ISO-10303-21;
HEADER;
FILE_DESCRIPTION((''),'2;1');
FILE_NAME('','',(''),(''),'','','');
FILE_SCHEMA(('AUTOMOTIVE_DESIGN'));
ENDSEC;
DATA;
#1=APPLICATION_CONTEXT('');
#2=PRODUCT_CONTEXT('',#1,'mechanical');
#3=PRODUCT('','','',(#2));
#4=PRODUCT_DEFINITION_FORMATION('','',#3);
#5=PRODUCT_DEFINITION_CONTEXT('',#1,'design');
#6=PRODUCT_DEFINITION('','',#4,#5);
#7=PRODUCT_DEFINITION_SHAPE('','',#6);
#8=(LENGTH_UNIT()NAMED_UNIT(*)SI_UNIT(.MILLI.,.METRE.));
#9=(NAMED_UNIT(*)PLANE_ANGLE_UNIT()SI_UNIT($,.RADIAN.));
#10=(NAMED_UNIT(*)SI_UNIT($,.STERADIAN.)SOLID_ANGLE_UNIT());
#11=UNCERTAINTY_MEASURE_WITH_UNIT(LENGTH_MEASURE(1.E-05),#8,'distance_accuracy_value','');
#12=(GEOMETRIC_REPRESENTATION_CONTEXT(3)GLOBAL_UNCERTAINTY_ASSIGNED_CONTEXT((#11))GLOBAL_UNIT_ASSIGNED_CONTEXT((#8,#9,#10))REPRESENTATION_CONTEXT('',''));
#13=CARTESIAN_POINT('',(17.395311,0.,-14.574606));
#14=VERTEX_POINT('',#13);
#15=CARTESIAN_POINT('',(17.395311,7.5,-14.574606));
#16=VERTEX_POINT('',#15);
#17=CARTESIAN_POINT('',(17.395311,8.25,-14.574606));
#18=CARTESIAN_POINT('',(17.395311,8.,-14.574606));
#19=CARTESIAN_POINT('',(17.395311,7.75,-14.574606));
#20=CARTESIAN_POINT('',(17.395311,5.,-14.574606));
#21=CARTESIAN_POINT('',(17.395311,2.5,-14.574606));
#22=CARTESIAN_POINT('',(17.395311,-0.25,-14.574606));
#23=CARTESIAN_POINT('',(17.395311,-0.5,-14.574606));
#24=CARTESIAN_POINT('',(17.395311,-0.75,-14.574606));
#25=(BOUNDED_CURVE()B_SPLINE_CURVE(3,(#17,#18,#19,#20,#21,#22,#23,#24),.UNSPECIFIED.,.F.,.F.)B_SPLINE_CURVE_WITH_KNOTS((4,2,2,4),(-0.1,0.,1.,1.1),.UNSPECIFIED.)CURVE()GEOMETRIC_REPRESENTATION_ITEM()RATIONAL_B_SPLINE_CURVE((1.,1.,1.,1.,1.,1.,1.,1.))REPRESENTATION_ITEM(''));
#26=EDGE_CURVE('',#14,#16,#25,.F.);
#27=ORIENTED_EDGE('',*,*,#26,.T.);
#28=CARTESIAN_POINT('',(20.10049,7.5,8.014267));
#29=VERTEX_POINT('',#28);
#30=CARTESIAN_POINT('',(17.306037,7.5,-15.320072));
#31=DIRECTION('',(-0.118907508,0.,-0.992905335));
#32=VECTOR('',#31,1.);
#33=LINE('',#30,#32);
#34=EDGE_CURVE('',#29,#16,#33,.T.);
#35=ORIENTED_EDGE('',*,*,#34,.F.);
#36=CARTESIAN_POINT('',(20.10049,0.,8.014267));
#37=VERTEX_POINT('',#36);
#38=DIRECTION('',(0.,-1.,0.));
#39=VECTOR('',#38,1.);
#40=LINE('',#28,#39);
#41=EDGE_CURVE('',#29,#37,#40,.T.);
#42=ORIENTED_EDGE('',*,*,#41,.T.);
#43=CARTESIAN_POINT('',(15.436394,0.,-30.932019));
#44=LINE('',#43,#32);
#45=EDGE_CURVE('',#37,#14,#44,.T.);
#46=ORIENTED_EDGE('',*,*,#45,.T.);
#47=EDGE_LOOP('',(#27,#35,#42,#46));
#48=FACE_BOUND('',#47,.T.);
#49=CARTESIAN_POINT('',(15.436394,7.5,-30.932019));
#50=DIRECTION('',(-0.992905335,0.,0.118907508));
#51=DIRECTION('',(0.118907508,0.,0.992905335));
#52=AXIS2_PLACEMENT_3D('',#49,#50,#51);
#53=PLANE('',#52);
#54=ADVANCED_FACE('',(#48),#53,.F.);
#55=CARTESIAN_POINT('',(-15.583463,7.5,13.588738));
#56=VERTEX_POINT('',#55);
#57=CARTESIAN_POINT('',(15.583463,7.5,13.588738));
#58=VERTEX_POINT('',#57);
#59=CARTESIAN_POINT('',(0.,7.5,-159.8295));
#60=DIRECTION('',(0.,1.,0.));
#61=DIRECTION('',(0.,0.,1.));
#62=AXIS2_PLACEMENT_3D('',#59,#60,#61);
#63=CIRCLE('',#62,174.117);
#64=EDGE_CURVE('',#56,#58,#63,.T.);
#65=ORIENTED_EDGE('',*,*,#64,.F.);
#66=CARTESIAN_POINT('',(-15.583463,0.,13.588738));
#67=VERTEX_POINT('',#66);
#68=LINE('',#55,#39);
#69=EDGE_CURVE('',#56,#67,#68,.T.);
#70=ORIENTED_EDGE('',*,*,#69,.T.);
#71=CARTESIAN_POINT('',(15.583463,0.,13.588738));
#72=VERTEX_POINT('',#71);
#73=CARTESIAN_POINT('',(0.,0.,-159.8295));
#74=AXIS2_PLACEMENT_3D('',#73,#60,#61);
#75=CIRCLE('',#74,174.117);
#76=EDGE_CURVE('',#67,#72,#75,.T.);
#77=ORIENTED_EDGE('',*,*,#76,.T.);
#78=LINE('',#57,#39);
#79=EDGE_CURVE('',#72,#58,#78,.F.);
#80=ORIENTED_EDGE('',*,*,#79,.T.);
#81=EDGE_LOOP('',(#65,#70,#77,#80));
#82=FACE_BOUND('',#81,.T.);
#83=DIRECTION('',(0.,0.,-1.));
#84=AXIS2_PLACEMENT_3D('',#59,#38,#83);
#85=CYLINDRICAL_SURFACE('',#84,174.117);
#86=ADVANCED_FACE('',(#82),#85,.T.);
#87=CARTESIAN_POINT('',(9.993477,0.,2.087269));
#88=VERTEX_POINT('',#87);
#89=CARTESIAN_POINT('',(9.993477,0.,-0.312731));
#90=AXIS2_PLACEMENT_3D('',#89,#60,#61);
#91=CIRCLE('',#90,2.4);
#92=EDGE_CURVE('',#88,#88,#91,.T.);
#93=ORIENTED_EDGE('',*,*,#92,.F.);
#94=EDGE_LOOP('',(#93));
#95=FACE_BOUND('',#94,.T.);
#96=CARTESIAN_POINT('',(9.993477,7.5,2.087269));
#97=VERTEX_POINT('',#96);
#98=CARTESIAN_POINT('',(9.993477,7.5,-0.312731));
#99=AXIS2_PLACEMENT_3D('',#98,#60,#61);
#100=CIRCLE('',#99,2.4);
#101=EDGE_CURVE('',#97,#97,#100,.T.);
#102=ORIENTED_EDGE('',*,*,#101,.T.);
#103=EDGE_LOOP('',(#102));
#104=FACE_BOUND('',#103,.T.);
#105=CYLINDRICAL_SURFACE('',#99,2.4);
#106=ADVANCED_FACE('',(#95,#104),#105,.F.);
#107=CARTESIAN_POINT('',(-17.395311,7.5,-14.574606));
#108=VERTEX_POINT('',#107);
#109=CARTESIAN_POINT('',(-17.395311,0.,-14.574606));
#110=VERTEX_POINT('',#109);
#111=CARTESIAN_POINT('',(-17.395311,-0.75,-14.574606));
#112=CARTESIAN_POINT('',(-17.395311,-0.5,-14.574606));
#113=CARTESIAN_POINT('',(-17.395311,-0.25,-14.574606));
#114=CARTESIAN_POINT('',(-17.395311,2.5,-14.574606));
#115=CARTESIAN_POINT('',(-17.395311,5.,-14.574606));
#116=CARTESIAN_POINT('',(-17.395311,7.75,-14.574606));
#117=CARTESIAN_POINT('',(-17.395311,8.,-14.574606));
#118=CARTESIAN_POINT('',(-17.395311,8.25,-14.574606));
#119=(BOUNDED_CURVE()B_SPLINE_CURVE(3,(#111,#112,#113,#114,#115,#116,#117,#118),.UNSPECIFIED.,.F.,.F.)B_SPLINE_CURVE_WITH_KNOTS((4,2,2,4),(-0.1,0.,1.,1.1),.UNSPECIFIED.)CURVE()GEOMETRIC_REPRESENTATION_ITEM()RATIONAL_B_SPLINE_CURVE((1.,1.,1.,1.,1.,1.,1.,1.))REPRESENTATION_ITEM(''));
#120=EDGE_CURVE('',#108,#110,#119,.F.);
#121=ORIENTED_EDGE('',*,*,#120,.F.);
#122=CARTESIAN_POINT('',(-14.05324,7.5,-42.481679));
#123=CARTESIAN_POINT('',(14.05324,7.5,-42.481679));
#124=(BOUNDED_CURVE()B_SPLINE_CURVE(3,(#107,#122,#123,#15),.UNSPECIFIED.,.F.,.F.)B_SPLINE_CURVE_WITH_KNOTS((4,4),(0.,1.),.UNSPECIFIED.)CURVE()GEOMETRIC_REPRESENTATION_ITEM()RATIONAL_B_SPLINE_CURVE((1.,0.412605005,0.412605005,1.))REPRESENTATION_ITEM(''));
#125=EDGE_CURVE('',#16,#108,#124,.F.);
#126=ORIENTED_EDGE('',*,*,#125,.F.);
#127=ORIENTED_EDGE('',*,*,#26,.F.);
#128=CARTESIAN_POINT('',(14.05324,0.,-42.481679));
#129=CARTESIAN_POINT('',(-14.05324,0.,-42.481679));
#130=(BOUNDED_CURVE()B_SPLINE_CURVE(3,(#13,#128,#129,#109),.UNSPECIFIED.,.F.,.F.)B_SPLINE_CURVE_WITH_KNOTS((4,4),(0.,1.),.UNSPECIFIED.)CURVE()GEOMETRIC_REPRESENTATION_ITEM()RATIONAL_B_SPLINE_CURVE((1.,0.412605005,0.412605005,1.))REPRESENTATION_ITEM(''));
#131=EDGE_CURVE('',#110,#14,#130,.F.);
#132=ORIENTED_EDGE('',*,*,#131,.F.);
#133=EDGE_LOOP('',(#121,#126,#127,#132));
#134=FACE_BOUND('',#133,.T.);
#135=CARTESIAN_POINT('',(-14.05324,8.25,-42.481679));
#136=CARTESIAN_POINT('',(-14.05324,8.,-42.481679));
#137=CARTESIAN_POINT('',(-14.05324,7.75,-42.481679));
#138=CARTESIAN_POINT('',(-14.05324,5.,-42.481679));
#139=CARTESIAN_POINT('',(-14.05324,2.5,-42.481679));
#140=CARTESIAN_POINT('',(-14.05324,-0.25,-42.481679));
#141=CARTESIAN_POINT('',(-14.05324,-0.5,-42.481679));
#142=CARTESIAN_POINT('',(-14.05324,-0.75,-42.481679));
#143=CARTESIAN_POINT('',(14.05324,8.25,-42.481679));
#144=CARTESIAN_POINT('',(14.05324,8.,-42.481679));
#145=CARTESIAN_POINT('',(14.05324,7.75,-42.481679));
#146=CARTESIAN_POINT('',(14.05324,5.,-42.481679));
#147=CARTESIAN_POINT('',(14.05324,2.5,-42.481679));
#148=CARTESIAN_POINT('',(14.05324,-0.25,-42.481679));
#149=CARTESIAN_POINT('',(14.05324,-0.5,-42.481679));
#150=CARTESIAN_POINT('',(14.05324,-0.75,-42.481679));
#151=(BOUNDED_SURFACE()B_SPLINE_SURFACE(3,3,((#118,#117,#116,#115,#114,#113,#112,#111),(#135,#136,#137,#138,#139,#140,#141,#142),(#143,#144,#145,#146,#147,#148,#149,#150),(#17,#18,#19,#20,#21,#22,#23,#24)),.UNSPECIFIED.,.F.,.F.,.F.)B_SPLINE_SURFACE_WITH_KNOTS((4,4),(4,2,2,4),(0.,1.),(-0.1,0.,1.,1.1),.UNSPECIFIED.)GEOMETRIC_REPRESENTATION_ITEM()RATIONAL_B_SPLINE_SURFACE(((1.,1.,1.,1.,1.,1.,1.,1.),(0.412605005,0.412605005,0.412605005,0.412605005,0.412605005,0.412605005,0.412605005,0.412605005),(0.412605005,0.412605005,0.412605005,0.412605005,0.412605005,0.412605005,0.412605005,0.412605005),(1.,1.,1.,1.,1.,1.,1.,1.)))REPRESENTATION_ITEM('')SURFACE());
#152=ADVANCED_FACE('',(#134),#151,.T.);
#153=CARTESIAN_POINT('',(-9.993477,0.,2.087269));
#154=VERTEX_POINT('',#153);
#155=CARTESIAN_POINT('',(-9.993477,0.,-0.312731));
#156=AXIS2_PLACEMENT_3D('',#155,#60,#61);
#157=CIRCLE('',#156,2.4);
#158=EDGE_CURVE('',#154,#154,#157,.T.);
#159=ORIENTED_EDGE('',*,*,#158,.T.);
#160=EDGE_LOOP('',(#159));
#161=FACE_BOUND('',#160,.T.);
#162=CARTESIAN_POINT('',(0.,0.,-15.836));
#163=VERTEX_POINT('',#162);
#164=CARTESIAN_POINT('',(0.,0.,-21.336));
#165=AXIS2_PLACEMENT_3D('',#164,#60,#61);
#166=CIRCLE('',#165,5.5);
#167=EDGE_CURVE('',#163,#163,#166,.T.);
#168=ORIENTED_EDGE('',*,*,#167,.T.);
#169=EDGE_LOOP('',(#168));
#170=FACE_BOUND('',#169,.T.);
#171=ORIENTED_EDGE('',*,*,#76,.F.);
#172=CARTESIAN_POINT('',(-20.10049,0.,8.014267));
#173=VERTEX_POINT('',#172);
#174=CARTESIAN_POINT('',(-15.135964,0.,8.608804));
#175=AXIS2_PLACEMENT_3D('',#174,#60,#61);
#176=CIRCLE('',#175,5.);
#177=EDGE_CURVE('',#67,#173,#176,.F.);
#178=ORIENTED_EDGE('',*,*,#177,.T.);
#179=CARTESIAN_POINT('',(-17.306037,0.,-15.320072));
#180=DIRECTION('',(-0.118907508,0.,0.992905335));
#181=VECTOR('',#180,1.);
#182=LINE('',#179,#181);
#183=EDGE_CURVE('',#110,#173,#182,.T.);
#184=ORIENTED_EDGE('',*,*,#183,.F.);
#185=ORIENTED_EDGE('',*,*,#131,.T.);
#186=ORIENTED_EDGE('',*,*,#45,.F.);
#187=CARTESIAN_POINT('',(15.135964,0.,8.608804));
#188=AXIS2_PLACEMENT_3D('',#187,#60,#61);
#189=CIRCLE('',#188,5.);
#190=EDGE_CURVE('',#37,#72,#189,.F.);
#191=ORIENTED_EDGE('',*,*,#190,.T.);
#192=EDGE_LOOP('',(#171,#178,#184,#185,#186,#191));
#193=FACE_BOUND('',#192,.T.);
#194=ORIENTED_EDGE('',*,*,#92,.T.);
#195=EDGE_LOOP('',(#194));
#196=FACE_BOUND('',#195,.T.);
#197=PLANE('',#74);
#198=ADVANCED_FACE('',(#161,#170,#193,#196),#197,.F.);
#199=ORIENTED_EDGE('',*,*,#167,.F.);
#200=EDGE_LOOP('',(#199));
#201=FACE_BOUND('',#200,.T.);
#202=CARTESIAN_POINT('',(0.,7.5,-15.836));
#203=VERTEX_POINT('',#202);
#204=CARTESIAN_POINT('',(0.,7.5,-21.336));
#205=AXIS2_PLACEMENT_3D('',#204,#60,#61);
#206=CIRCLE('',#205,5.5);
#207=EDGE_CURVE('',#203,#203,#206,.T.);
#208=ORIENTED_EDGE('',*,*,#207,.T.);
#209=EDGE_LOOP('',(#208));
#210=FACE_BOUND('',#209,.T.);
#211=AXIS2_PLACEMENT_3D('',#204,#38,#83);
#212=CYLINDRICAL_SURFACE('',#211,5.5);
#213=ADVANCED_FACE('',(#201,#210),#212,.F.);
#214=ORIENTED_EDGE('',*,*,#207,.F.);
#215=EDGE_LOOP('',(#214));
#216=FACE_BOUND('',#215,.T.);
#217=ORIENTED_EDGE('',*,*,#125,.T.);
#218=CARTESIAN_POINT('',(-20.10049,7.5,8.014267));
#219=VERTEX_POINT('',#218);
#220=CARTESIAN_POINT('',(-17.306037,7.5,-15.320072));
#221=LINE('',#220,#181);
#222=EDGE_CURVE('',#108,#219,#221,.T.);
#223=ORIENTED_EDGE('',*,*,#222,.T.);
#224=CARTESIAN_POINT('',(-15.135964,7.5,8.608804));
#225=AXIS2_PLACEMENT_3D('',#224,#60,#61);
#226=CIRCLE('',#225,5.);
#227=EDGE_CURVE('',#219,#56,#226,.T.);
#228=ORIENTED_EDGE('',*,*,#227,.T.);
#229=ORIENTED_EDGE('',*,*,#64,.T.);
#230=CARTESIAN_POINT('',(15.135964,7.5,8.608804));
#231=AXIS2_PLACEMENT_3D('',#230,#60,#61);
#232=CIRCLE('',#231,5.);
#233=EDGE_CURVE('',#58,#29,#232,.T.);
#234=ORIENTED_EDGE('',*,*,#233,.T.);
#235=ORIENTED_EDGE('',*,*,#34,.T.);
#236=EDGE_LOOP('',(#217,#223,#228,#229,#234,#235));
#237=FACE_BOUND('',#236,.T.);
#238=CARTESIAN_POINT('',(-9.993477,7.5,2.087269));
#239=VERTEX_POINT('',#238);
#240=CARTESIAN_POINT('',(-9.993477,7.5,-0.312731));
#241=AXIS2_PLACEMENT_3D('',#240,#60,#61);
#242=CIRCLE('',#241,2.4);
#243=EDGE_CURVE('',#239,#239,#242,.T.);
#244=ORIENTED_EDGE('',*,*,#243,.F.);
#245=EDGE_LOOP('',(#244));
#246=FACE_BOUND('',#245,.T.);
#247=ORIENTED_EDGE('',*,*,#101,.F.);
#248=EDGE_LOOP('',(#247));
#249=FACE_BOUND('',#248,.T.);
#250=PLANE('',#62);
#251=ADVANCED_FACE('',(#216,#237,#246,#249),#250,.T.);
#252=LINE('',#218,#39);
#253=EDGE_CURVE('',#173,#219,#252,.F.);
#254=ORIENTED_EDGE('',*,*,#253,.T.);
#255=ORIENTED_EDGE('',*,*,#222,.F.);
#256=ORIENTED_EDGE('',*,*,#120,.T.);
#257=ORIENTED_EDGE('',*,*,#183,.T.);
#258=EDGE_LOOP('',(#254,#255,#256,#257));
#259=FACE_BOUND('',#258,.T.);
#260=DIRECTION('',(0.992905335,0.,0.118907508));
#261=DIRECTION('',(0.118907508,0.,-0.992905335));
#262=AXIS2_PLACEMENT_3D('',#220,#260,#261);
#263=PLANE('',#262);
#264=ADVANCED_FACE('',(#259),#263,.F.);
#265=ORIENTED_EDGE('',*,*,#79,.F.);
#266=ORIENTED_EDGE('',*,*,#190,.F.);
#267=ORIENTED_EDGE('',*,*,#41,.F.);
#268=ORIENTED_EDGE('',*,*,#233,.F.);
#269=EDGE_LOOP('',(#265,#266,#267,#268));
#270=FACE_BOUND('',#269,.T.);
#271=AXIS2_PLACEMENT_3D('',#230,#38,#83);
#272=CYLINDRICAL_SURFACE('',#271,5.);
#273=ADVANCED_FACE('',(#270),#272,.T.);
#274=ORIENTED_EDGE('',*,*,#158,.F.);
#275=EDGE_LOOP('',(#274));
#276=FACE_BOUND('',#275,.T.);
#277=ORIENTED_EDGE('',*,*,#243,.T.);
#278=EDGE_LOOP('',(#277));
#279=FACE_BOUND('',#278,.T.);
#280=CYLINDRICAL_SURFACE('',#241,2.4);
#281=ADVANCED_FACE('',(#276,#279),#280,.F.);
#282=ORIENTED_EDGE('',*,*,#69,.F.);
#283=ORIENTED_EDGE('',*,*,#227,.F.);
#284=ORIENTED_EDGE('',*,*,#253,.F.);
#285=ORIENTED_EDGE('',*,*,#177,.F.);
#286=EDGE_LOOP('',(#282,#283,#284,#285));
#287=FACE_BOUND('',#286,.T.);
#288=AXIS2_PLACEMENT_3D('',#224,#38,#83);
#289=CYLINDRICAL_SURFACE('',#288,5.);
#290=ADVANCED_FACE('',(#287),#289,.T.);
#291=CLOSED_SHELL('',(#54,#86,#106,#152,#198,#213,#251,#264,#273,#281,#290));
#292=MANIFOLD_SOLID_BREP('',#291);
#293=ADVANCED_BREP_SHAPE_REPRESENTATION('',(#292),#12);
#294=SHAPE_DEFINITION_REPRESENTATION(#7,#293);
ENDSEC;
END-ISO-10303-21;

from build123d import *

# Parameters (mm, degrees)
SKETCH1_R            = 5.5
BOSS_EXTRUDE1_DEPTH  = 7.5
FILLET1_START        = -1
FILLET1_DEPTH        = 9
M4_CLEARANCE_HOLE1_D = 4.8
FILLET2_R            = 5


with BuildPart() as part:
    # Sketch1 → Boss-Extrude1 (new body)
    with BuildSketch(Plane(origin=(0, 0, 0), x_dir=(1, 0, 0), z_dir=(0, 1, 0))):
        with BuildLine():
            Line((-17.306036515, 15.320071712), (-20.703818553, -13.05219824))
            ThreePointArc((-20.703818553, -13.05219824), (0, -14.2875), (20.703818553, -13.05219824))
            Line((20.703818553, -13.05219824), (17.306036515, 15.320071712))
            Line((17.306036515, 15.320071712), (15.436394314, 30.932018749))
            ThreePointArc((15.436394314, 30.932018749), (0, 30.011), (-15.436394314, 30.932018749))
            Line((-15.436394314, 30.932018749), (-17.306036515, 15.320071712))
        make_face()
        with Locations(Location((0, 21.336, 0), (0, 0, 270))):
            Circle(SKETCH1_R, mode=Mode.SUBTRACT)
    extrude(amount=BOSS_EXTRUDE1_DEPTH)

    # Fillet1: read off the stored shape, not the designer's step
    # Fillet1 outline → Fillet1 (cut)
    with BuildSketch(Plane(origin=(0, 0, 0), x_dir=(1, 0, 0), z_dir=(0, 1, 0)).offset(FILLET1_START)):
        with BuildLine():
            Line((-15.436394314, 30.932018749), (-17.395311398, 14.574605686))
            add(Edge.make_bspline(
                [(-17.395311398, 14.574605686), (-16.419132346, 22.72592771), (-10.364461962, 30.010999958), (-7.1e-08, 30.011)],
                knots=[0, 0, 0, 0, 0.499999999, 0.499999999, 0.499999999, 0.499999999], degree=3, weights=[1, 0.706302503, 0.559453755, 0.559453754]))
            ThreePointArc((-7.1e-08, 30.011), (-7.731923227, 30.24145925), (-15.436394314, 30.932018749))
        make_face()
        with BuildLine():
            ThreePointArc((15.436394314, 30.932018749), (7.731923156, 30.241459246), (-7.1e-08, 30.011))
            add(Edge.make_bspline(
                [(-7.1e-08, 30.011), (10.364461892, 30.011000042), (16.41913234, 22.725927763), (17.395311398, 14.574605686)],
                knots=[0.499999999, 0.499999999, 0.499999999, 0.499999999, 1, 1, 1, 1], degree=3, weights=[0.559453754, 0.559453753, 0.706302502, 1]))
            Line((17.395311398, 14.574605686), (15.436394314, 30.932018749))
        make_face()
    extrude(amount=FILLET1_DEPTH, mode=Mode.SUBTRACT)

    # M4 Clearance Hole1 (through all)
    with Locations(Plane(origin=(0, 7.5, 0), x_dir=(1, 0, 0), z_dir=(0, 1, 0))):
        with Locations((-9.993476963, 0.312731325), (9.993476963, 0.312731325)):
            Hole(M4_CLEARANCE_HOLE1_D / 2)

    # Fillet2
    fillet2_edges = [part.edges().sort_by_distance(p)[0] for p in [
        (20.703818553, 3.75, 13.05219824),
        (-20.703818553, 3.75, 13.05219824),
    ]]
    fillet(fillet2_edges, radius=FILLET2_R)


solid = part.part
